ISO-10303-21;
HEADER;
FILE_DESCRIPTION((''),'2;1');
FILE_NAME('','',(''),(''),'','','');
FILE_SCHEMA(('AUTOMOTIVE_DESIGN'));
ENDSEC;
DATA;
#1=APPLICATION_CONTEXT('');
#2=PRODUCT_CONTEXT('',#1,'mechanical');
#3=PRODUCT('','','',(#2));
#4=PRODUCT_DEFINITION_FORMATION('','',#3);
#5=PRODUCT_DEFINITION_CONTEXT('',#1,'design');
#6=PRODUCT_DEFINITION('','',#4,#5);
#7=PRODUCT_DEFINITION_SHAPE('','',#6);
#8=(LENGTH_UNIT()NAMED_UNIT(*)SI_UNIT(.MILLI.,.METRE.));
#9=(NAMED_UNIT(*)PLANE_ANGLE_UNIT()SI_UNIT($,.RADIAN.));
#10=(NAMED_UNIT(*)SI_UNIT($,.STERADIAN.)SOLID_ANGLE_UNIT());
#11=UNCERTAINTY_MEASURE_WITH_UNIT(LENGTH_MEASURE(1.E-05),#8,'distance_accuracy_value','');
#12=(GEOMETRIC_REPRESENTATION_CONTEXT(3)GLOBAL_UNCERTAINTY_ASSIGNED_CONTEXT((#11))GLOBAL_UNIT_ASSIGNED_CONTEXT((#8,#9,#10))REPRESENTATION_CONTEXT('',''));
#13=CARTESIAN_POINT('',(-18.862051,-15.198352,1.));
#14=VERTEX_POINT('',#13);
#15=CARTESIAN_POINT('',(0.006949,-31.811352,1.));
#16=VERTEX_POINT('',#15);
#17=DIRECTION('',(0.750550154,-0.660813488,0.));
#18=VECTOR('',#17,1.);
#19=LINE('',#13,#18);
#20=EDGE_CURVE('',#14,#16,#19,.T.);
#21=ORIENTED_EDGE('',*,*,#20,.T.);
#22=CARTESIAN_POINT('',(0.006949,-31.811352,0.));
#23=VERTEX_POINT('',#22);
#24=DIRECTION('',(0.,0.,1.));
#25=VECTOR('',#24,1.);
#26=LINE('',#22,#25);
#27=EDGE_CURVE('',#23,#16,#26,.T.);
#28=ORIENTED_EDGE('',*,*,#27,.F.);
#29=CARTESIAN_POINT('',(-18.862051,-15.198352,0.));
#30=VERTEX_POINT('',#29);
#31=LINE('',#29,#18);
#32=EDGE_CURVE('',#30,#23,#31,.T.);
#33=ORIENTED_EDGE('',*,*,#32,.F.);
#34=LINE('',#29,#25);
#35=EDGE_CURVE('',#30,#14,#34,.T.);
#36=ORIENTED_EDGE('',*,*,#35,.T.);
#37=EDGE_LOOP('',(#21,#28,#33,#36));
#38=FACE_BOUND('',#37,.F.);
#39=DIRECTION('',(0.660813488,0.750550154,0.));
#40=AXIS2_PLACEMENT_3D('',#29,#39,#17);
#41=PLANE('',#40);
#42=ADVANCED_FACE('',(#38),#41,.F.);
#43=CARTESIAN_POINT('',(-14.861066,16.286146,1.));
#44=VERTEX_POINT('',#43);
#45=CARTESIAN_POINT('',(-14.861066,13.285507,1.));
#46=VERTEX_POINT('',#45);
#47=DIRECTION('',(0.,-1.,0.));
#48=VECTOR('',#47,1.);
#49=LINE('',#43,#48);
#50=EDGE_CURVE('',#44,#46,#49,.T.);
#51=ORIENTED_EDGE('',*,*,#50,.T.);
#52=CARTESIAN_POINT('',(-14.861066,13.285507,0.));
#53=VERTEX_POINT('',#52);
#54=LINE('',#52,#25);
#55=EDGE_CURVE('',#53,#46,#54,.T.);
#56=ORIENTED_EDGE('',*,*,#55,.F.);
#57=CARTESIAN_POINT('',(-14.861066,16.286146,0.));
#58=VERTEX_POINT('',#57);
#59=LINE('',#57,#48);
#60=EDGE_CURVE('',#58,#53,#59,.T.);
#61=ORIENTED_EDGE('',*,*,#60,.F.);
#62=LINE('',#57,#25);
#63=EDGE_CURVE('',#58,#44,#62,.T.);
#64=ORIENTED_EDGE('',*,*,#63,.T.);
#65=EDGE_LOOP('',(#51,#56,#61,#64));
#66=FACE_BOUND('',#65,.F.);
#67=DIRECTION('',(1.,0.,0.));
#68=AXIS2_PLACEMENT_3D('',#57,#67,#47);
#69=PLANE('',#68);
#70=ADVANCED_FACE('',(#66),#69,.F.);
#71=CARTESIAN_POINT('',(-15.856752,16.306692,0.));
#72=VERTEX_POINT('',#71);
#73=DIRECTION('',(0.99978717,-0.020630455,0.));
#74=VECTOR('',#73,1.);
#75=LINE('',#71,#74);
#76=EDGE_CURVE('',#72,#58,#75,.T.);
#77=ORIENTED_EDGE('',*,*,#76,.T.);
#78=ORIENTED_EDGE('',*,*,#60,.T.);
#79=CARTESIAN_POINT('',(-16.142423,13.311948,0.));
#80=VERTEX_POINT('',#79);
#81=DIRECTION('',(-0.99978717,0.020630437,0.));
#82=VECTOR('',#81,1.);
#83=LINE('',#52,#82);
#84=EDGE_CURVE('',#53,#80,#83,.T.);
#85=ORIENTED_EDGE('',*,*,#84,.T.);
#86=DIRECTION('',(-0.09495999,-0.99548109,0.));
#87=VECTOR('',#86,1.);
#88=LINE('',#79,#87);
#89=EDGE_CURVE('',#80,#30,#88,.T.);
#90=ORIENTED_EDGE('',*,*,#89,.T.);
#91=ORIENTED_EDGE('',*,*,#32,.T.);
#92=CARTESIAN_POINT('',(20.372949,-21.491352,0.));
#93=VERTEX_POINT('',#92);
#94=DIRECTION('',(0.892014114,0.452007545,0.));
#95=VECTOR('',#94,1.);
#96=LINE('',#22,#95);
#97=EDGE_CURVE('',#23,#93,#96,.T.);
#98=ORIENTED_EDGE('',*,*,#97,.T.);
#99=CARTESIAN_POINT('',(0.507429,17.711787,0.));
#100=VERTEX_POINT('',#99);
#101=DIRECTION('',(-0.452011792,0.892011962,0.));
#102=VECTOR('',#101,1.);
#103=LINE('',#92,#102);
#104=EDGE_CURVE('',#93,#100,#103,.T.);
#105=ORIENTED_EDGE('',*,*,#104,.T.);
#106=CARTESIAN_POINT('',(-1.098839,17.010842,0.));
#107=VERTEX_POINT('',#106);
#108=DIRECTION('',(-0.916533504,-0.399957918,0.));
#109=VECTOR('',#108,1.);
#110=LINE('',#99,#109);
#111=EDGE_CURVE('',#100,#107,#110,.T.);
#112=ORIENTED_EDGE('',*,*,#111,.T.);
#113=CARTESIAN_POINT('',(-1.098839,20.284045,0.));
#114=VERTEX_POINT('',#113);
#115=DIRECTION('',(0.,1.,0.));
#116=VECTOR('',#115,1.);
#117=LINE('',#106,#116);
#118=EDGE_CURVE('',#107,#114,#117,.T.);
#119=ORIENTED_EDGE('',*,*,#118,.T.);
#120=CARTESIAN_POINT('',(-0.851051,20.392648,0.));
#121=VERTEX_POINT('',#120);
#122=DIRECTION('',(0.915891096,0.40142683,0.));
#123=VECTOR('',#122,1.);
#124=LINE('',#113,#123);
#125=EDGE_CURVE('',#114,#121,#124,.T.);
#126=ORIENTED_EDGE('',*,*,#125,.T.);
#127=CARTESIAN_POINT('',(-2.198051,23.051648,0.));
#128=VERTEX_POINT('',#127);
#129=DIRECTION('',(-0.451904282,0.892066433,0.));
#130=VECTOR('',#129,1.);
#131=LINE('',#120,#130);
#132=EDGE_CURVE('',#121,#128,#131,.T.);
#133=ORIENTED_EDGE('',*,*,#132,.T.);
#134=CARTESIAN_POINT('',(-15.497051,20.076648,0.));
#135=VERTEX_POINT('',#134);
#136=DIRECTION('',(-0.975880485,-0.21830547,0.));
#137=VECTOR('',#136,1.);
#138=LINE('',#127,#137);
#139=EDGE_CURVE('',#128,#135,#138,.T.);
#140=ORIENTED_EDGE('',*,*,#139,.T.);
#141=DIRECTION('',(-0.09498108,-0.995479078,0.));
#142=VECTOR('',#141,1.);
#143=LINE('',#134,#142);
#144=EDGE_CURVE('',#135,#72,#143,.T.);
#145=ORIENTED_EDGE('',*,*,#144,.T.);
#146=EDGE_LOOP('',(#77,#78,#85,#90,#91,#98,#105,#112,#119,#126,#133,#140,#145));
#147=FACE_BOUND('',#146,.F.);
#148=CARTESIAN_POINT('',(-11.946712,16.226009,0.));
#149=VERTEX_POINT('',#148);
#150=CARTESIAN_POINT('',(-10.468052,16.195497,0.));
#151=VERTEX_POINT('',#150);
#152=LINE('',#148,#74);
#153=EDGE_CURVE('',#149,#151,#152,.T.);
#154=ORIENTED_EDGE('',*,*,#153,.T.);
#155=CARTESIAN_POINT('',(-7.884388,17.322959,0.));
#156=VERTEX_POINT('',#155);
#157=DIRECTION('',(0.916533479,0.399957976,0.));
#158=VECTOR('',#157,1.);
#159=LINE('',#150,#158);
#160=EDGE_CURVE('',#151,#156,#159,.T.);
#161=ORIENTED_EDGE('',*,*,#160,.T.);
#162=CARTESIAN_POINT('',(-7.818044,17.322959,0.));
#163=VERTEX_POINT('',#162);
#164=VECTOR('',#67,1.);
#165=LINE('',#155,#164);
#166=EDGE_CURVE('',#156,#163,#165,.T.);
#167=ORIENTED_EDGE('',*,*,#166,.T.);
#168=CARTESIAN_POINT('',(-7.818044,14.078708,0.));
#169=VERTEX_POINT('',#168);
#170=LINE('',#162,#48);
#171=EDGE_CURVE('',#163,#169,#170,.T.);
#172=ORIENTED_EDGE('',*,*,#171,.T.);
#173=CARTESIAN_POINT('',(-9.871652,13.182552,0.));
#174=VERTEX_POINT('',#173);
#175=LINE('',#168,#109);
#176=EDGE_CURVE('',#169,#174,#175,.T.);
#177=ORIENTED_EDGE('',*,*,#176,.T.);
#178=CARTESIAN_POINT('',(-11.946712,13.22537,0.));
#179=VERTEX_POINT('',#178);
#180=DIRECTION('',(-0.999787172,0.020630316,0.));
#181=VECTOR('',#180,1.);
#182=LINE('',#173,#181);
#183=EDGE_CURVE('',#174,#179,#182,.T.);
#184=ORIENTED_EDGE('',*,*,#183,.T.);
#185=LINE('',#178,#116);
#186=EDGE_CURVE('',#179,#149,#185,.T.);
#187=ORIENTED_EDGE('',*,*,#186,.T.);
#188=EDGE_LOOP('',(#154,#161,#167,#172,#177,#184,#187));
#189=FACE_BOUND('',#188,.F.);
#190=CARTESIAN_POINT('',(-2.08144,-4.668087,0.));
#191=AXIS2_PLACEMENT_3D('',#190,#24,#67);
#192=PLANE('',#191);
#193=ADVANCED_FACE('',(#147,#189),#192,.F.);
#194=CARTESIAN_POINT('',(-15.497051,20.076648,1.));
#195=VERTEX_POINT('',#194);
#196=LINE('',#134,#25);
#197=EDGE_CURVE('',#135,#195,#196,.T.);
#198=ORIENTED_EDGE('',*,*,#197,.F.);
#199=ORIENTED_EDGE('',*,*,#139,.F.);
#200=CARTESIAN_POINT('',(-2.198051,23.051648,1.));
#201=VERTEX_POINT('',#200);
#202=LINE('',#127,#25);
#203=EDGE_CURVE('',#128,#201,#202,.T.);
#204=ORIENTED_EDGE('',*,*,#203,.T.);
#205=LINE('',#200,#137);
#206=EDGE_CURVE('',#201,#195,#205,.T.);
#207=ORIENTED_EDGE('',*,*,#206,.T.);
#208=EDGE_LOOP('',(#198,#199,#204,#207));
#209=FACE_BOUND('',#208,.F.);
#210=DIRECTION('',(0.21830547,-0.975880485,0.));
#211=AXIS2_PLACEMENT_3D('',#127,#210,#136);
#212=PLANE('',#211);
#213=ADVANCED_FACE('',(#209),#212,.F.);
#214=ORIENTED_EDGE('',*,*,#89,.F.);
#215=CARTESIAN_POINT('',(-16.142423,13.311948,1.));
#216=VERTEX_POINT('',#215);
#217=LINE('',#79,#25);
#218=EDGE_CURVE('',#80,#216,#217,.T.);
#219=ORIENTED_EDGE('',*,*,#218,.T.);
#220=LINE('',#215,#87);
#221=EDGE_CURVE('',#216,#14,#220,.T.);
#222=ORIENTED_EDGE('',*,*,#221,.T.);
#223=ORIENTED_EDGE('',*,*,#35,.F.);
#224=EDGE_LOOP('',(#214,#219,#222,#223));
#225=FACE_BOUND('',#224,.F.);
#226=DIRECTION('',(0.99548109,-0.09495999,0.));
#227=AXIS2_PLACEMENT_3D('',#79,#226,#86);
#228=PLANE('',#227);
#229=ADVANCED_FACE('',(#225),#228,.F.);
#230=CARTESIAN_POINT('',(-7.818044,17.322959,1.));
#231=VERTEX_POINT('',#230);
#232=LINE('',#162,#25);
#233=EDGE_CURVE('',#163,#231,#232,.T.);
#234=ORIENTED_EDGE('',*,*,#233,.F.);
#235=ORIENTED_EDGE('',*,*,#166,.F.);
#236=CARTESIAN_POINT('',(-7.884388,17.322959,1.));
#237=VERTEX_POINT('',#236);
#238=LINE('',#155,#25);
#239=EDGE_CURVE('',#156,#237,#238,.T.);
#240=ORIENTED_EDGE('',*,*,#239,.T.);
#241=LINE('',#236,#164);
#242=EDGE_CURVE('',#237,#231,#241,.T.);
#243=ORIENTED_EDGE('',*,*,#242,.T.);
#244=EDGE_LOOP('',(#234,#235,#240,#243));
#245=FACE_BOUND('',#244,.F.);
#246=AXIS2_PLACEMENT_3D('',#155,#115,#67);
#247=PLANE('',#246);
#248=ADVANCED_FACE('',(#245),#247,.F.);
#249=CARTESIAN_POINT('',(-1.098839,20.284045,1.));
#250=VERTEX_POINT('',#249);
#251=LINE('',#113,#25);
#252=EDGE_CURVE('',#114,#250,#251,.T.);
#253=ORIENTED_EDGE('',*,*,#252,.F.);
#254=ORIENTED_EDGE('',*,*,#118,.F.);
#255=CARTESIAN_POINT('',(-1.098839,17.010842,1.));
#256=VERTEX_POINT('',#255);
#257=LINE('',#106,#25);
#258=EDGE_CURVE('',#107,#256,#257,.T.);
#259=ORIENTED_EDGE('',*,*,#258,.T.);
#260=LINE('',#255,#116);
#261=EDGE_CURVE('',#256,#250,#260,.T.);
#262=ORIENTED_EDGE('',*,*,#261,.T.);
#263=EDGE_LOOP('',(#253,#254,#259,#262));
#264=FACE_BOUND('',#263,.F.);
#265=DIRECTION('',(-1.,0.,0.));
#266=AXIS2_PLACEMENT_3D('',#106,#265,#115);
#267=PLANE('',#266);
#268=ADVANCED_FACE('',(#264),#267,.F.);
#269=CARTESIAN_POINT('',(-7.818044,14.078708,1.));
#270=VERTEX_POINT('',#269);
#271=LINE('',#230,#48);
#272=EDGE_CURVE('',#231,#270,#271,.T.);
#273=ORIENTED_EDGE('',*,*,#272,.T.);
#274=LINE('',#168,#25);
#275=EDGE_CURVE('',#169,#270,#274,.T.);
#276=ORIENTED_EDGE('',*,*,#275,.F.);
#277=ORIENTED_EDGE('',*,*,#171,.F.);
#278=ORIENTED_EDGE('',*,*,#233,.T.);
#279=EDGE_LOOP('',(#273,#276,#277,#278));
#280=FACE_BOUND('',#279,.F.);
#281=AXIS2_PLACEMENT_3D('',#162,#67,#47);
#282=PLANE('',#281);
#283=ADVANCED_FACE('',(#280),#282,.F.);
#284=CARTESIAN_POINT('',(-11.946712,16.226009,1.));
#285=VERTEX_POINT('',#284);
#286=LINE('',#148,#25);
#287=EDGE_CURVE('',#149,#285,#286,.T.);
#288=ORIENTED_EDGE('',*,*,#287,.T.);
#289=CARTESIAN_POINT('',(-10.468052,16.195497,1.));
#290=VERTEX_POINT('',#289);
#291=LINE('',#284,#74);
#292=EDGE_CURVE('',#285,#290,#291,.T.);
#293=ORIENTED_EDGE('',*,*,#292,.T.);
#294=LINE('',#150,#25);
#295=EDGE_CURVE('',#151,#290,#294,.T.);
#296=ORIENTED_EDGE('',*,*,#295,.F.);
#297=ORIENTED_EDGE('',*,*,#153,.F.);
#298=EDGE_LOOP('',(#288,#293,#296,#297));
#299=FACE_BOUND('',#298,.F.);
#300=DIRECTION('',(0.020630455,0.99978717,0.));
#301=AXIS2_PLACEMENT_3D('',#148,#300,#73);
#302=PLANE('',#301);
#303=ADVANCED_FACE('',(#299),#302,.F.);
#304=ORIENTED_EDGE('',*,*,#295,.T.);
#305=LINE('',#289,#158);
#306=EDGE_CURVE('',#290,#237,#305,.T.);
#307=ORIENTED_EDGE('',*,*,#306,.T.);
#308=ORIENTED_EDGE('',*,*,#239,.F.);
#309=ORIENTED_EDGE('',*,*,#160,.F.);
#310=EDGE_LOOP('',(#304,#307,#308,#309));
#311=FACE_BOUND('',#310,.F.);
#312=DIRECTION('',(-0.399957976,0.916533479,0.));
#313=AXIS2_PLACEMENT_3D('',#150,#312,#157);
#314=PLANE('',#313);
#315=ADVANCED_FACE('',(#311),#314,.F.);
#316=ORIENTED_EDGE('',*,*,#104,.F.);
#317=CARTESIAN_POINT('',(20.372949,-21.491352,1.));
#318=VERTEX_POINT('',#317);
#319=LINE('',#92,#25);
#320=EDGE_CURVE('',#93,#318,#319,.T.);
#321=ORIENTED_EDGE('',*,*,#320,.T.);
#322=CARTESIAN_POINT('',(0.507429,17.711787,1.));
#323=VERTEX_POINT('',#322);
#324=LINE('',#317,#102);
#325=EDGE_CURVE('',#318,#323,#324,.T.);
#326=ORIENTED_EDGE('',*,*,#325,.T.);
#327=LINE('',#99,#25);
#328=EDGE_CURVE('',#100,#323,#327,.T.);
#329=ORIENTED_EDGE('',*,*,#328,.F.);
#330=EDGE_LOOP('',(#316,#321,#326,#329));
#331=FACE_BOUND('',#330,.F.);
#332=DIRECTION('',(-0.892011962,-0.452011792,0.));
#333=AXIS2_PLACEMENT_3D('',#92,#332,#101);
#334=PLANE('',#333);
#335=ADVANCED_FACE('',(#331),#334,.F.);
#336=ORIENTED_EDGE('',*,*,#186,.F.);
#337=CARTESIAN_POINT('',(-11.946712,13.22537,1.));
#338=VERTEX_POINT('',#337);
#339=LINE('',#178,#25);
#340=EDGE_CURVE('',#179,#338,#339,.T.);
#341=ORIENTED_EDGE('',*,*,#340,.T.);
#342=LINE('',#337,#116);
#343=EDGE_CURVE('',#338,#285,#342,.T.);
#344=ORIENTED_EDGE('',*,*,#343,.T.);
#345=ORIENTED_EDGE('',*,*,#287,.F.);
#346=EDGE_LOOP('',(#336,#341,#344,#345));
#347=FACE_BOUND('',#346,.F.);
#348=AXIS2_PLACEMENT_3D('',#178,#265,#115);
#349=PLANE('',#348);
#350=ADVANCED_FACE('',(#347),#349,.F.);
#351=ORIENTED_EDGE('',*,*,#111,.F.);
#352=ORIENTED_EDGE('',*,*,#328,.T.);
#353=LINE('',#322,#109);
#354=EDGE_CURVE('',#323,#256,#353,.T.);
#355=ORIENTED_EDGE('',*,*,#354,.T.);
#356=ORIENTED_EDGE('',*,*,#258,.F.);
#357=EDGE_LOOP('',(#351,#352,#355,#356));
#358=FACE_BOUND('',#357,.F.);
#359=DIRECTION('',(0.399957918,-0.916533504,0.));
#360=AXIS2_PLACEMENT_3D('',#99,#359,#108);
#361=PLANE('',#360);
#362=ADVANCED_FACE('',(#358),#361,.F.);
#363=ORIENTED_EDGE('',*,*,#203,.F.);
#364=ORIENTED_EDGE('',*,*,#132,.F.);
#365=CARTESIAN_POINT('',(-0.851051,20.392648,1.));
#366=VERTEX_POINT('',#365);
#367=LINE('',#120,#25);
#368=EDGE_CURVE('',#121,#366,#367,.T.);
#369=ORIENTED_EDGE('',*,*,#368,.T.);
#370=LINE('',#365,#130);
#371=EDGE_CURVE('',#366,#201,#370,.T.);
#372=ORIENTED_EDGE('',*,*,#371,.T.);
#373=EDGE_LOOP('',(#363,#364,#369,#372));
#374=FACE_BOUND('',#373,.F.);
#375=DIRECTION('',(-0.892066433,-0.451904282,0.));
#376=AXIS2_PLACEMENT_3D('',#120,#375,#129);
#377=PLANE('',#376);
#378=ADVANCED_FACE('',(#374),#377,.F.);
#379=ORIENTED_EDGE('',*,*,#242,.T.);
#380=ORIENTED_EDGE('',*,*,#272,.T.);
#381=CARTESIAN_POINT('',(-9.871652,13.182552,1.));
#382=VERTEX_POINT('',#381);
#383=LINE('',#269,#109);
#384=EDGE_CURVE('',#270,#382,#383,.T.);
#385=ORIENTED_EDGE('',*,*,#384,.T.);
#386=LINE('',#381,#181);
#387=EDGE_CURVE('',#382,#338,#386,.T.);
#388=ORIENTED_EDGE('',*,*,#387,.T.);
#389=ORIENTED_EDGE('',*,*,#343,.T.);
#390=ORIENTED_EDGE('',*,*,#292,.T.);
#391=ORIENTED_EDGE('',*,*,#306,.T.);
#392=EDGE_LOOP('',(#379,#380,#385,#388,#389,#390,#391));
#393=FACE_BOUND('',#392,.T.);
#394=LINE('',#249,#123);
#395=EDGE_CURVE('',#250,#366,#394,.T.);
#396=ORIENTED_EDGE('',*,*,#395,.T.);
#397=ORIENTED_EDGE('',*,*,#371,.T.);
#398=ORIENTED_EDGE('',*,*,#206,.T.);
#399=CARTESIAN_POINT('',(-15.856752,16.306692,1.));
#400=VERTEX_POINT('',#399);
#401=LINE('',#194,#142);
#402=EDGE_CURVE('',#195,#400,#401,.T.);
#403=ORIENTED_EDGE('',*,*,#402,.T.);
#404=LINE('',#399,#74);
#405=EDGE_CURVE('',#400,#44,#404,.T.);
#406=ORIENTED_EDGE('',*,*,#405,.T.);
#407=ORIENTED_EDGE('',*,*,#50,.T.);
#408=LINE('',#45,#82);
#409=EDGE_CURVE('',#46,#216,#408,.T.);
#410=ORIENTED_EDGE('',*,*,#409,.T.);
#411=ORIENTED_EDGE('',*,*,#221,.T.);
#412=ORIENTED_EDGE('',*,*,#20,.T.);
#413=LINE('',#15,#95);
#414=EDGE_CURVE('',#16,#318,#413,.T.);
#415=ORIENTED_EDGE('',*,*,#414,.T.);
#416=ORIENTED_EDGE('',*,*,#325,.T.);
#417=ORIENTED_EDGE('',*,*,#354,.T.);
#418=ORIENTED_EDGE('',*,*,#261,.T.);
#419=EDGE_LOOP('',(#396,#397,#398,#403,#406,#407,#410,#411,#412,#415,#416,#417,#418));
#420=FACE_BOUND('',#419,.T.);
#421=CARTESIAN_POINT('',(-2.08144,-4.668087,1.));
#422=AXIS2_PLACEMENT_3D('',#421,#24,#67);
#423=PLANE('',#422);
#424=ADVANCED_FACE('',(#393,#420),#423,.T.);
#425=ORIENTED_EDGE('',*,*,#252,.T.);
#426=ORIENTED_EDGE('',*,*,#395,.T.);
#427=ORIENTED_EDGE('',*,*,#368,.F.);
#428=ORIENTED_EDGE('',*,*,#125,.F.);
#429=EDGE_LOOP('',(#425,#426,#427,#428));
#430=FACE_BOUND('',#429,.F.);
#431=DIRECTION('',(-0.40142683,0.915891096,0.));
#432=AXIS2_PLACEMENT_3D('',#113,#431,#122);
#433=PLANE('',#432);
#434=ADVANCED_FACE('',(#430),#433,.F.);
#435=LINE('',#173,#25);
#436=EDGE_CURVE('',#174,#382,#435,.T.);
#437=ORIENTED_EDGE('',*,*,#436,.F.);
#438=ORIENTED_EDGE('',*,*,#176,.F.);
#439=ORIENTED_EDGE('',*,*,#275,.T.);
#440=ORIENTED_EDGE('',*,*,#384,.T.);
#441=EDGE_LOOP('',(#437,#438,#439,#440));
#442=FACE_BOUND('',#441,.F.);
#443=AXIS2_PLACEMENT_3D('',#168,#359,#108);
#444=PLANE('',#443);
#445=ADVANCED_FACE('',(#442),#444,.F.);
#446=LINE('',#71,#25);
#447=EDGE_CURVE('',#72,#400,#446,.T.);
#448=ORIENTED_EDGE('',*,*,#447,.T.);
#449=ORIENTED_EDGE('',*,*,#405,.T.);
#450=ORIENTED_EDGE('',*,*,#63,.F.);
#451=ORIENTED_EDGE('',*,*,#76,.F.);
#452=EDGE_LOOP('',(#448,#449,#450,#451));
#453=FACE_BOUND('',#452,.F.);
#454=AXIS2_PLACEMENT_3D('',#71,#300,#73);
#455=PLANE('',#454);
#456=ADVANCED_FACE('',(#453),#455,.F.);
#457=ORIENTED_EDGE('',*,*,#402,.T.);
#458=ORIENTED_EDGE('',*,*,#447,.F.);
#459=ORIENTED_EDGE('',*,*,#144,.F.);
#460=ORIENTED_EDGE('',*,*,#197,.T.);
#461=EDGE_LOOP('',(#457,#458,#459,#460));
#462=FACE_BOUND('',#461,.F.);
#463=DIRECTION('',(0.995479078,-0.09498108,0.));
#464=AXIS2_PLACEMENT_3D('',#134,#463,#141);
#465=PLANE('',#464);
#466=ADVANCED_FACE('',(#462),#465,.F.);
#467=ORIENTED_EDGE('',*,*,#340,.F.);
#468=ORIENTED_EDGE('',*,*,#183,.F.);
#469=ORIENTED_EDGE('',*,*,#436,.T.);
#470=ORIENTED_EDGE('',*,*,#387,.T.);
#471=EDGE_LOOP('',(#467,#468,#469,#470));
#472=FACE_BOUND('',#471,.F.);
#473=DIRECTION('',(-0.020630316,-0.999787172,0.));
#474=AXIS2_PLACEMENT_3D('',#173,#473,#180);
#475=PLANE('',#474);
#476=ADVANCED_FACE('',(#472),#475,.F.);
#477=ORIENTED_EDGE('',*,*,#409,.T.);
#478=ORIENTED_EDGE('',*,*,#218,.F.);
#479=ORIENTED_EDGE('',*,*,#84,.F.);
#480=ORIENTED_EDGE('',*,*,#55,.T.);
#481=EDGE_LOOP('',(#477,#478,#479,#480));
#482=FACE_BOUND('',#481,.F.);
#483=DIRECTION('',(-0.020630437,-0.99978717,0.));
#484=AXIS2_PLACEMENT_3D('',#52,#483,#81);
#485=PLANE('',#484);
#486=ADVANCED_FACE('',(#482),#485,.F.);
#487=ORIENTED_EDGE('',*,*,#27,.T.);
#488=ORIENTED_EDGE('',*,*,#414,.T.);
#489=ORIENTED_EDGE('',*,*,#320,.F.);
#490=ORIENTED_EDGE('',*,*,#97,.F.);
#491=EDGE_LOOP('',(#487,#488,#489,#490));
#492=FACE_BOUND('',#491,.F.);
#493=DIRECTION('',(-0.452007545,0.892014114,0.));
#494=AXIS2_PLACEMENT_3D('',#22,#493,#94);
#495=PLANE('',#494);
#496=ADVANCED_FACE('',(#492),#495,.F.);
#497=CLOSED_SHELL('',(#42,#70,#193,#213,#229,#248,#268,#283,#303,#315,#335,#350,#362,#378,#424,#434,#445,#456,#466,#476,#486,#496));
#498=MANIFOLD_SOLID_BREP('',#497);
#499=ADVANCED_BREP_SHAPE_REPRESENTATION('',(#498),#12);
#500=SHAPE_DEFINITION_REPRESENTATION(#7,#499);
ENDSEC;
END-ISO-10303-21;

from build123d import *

# Parameters (mm, degrees)
F1_DEPTH = 1


# Not quite as in the source:
# - ends of sketch curves that miss each other by under 0.0002 mm in the source are joined


with BuildPart() as f1:
    # F0 (on Top) → F1 (new body)
    with BuildSketch(Plane.XY):
        Polygon((-2.198051, 23.051648), (-15.497051, 20.076648), (-15.856751674, 16.3066919689), (-14.8610655684, 16.2861461385), (-14.8610655684, 13.2855074428), (-16.1424234512, 13.311948043), (-18.862051, -15.198352), (0.006949, -31.811352), (20.3729486667, -21.4913521689), (0.507429, 17.711787), (-1.0988393333, 17.0108418244), (-1.0988393333, 20.2840446021), (-0.851051, 20.392648), align=None)
        Polygon((-11.9467116892, 16.2260088921), (-10.468051674, 16.1954969689), (-7.8843876222, 17.3229593784), (-7.8180441633, 17.3229593784), (-7.8180441633, 14.0787076895), (-9.871652, 13.182552), (-11.9467116892, 13.2253702503), align=None, mode=Mode.SUBTRACT)
    extrude(amount=F1_DEPTH)


solid = f1.part
